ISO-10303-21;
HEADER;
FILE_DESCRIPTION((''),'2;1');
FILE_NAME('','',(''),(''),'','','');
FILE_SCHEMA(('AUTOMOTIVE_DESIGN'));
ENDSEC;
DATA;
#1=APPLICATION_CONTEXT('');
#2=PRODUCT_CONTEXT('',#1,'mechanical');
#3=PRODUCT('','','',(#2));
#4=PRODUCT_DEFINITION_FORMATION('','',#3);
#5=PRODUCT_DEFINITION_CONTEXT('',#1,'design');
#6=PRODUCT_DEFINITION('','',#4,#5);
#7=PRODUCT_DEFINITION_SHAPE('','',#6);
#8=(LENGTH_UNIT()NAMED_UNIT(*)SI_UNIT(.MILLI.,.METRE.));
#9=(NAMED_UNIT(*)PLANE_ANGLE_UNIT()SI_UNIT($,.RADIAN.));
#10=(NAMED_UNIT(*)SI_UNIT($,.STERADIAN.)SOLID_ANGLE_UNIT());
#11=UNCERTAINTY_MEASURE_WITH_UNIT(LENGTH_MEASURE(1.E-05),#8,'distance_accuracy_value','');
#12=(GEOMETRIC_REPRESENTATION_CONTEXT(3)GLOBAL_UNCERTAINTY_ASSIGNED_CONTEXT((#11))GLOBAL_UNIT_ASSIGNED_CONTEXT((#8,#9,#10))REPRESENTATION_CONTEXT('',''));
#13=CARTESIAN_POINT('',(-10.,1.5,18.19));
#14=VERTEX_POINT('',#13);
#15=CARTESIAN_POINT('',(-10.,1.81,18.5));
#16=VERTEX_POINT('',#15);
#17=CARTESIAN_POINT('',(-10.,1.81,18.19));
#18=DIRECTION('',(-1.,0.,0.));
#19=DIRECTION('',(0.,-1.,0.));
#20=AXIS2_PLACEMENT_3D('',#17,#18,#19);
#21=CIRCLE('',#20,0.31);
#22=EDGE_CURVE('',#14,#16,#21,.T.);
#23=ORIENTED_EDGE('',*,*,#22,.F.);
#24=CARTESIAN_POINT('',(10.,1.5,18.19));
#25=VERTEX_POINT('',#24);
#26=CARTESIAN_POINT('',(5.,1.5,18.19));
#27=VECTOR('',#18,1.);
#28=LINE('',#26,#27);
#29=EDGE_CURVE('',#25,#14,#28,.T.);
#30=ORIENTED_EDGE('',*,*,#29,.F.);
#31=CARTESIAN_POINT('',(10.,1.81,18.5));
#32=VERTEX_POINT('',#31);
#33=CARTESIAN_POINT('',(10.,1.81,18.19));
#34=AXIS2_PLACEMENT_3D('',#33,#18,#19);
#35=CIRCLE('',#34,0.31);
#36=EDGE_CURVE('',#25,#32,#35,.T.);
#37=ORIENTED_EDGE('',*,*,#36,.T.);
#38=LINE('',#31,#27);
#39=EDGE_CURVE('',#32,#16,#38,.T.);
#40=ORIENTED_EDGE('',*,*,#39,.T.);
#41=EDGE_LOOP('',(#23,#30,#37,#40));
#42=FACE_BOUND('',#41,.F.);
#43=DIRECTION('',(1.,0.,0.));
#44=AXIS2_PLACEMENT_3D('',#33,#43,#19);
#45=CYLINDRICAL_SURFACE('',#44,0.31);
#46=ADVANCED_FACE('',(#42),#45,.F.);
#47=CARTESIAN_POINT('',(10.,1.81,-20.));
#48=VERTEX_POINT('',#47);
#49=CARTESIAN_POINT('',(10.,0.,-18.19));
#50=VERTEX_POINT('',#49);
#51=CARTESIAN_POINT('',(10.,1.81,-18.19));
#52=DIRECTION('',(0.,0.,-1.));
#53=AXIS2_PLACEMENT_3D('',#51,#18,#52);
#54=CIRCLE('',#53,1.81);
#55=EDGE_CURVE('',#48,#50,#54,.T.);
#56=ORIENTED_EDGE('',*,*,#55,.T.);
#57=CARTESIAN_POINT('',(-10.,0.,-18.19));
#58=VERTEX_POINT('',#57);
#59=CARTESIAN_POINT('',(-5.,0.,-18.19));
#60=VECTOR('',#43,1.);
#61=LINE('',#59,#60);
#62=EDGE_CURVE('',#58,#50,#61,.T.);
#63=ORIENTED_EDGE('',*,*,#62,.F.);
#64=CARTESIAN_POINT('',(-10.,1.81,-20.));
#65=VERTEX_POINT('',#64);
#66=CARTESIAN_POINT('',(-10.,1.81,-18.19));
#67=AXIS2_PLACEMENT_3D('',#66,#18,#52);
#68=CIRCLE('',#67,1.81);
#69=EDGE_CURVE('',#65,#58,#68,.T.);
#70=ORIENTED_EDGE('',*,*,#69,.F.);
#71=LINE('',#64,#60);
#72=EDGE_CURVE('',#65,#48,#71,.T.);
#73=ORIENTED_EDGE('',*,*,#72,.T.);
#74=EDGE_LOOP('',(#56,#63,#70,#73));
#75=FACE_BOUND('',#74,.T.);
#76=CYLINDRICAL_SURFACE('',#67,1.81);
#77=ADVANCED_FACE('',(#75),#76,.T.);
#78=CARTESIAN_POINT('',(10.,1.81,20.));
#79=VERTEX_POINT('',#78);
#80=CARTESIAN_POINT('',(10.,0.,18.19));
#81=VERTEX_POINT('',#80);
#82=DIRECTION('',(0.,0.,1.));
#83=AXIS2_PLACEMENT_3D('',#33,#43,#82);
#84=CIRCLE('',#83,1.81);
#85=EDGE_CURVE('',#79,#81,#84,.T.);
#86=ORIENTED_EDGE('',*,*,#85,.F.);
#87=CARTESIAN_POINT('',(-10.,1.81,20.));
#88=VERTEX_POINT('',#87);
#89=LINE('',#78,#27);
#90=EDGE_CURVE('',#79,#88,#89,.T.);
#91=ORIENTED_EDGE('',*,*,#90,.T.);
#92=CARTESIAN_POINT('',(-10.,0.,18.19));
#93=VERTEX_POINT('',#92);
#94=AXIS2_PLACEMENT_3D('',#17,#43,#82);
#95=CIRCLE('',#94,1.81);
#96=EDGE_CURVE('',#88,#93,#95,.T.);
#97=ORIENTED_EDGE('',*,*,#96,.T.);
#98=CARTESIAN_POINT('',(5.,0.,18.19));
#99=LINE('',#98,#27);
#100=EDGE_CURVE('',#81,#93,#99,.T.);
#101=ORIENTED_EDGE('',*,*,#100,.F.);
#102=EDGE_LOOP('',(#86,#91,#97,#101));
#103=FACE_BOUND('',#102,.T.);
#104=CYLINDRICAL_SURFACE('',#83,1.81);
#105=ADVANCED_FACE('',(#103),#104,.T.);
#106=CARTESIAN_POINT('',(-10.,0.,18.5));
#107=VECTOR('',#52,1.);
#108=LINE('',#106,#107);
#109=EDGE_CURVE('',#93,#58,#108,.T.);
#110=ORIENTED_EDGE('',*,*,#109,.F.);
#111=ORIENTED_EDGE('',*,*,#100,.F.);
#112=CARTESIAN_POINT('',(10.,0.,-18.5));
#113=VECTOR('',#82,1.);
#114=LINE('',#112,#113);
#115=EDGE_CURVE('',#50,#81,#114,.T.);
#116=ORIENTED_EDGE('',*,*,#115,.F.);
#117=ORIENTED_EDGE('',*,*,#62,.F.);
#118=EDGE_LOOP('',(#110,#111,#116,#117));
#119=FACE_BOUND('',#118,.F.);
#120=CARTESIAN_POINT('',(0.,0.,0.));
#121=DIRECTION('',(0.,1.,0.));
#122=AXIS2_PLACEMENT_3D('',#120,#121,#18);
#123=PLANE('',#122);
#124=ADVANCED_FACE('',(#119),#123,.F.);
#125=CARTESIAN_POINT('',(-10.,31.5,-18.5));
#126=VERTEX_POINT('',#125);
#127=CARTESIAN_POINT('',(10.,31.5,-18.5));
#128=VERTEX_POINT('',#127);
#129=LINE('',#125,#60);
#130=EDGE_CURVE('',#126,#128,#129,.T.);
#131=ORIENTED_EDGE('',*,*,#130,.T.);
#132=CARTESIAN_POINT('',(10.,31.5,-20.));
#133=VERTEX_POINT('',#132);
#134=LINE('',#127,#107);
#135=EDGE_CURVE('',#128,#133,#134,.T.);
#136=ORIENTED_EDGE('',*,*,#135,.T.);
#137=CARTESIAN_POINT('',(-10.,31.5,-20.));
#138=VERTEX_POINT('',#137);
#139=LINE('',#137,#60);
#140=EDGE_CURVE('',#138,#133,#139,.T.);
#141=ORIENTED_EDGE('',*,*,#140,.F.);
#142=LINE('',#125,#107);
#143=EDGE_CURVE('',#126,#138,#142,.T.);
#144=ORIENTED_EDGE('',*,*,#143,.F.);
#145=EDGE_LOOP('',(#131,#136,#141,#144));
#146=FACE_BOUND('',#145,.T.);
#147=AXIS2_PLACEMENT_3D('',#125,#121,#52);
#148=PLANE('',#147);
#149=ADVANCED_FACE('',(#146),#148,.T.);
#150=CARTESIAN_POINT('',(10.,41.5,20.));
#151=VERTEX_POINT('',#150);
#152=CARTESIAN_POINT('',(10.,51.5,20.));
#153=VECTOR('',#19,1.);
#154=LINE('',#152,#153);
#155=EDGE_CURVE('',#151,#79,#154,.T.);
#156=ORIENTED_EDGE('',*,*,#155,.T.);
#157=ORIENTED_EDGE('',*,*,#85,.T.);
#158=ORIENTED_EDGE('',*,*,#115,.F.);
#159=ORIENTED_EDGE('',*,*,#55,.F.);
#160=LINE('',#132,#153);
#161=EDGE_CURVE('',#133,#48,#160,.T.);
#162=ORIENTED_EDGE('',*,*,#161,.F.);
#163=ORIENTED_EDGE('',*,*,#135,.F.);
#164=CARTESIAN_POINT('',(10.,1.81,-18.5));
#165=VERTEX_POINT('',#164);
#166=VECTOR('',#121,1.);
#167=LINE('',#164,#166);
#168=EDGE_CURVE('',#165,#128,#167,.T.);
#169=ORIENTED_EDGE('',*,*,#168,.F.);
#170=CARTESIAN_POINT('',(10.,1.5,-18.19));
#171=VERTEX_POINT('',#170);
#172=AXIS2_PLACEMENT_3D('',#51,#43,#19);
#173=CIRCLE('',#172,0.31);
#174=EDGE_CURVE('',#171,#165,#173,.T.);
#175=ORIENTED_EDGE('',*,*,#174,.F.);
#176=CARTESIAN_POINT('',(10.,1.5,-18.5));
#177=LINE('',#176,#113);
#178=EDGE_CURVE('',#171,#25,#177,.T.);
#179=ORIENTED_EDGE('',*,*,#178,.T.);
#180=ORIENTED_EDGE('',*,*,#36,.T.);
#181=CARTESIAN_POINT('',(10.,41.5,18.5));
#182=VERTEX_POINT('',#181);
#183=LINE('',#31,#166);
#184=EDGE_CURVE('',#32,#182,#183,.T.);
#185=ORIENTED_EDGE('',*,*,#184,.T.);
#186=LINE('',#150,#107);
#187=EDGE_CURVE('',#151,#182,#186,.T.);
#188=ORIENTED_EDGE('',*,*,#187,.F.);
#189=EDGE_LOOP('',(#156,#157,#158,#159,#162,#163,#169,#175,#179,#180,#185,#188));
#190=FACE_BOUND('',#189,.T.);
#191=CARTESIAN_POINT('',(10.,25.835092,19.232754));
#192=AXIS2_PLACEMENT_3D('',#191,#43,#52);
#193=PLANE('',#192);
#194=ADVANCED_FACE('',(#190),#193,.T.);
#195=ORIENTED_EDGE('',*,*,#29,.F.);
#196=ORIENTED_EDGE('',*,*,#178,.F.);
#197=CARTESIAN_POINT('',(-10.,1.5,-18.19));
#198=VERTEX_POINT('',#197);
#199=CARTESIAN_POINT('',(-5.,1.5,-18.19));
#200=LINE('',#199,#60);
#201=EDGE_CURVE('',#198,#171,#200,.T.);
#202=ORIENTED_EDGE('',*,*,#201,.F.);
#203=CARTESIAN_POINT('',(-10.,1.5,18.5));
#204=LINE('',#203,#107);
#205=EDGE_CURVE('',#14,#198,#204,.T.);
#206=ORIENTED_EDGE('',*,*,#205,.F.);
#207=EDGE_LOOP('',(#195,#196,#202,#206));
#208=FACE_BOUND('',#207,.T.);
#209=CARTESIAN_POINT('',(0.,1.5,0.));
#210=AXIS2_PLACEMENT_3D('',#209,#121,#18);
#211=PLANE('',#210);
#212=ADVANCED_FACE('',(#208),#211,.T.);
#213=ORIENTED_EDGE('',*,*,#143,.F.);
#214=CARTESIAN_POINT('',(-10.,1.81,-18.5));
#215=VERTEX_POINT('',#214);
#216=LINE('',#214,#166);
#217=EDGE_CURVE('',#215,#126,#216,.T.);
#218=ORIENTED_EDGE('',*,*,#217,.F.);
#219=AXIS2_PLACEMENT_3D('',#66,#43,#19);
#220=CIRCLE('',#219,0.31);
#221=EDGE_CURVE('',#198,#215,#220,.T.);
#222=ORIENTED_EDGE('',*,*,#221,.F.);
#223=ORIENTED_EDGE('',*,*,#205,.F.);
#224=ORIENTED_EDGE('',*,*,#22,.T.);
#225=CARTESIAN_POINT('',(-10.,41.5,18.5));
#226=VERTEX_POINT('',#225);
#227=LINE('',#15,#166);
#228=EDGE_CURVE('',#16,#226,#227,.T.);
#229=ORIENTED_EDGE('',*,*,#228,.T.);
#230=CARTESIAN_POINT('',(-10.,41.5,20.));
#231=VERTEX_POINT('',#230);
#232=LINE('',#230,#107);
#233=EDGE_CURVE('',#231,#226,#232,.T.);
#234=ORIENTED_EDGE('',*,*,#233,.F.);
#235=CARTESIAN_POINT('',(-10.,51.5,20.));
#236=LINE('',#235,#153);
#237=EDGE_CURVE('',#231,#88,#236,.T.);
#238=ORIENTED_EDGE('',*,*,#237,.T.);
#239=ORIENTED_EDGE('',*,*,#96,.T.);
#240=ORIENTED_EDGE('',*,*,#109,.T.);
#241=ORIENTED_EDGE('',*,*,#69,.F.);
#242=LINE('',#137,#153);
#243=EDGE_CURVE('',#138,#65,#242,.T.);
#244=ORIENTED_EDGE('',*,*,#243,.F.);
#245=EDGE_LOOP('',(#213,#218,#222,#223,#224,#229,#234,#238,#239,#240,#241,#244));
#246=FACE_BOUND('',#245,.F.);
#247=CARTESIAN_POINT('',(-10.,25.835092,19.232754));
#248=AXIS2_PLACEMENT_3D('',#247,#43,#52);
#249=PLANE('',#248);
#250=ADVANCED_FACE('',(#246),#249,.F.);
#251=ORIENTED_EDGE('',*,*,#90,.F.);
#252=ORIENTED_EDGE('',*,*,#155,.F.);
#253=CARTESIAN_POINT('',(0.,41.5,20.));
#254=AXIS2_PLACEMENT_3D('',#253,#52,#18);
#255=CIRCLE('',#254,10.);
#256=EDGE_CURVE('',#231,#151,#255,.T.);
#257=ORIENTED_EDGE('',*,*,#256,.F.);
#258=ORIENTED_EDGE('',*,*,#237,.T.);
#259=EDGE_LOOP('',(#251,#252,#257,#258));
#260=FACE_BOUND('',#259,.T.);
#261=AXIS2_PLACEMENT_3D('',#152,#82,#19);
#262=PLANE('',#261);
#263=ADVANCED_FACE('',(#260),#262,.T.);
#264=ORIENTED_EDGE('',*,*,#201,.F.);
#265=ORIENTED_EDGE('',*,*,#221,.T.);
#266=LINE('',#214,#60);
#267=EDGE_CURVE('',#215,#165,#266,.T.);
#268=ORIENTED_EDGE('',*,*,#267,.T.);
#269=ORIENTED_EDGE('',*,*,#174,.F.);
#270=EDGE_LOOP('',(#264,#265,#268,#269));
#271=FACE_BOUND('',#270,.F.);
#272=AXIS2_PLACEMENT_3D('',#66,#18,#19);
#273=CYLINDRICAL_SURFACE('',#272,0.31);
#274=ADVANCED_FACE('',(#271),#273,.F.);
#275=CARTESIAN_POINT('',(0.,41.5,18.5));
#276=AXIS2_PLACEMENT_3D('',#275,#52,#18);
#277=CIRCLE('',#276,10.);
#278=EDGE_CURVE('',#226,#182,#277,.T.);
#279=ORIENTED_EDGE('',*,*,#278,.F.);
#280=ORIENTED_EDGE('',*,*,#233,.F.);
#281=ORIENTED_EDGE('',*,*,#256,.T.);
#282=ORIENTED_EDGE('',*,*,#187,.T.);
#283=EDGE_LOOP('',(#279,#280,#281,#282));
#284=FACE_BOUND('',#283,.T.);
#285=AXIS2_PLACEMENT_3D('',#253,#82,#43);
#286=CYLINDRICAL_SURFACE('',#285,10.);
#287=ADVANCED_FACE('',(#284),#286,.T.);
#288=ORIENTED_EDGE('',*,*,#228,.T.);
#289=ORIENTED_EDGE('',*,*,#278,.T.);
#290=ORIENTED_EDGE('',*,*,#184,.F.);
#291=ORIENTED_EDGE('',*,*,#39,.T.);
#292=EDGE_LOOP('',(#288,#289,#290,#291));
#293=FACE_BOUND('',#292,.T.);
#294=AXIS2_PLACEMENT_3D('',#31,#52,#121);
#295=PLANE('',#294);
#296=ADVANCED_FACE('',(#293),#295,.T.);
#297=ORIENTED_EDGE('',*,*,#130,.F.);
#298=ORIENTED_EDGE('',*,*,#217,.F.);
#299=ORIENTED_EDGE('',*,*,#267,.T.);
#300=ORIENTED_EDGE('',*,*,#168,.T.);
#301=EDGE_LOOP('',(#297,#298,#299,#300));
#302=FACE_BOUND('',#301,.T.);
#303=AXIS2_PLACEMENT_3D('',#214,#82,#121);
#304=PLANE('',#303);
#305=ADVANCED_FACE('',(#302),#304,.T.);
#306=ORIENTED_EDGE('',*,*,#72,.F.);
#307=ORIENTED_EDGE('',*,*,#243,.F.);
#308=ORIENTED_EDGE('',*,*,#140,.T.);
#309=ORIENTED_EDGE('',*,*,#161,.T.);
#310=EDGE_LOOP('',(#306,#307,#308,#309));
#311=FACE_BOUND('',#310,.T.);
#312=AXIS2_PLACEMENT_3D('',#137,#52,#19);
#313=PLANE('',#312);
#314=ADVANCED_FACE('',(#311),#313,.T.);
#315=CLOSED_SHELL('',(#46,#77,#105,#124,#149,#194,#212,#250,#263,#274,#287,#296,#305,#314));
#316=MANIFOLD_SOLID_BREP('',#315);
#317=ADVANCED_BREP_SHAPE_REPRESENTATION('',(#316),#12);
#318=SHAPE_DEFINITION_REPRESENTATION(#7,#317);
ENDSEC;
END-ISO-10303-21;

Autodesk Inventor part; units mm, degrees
ref_plane "YZ Plane" through (0, 0, 0) normal (1, 0, 0) x (0, 1, 0)
ref_plane "XZ Plane" through (0, 0, 0) normal (0, 1, 0) x (-1, 0, 0)
ref_plane "XY Plane" through (0, 0, 0) normal (0, 0, 1) x (1, 0, 0)
sketch "Sketch1" plane through (0, 0, 0) normal (0, 1, 0) x (-1, 0, 0)
  line L0 (10, -18.5) -> (-10, -18.5)
  line L1 (-10, -18.5) -> (-10, 18.5)
  line L2 (-10, 18.5) -> (10, 18.5)
  line L3 (10, 18.5) -> (10, -18.5)
  point P0 (0, 0)
  dimension "d0" = 20
  dimension "d1" = 37
  dimension "d2" = 18.5
  dimension "d3" = 10
extrude "Plate1" add sketch "Sketch1" along normal blind 1.5
sketch "Sketch2" plane through (-10, 0, -20) normal (0, 0, 1) x (1, 0, 0)
  line L0 (20, 0) -> (0, 0)
  line L1 (0, 0) -> (0, 31.5)
  line L2 (0, 31.5) -> (20, 31.5)
  line L3 (20, 31.5) -> (20, 0)
edge flange "Flange1" height 31.5 angle 90 thickness 1.5 bend radius 0.31 thickness toward (0, 0, 1) relief tear relief width 1.5 relief depth 0.75 edges at (0, 1.5, -18.5) wall of the first edge with corners at (10, 0, -20) (-10, 0, -20) (-10, 31.5, -20) (10, 31.5, -20)
bend "Bend1"
corner "Corner1"
sketch "Sketch3" plane through (10, 0, 20) normal (0, 0, -1) x (-1, 0, 0)
  line L0 (20, 0) -> (0, 0)
  line L1 (0, 0) -> (0, 51.5)
  line L2 (0, 51.5) -> (20, 51.5)
  line L3 (20, 51.5) -> (20, 0)
edge flange "Flange2" height 51.5 angle 90 thickness 1.5 bend radius 0.31 thickness toward (0, 0, -1) relief tear relief width 1.5 relief depth 0.75 edges at (0, 1.5, 18.5) wall of the first edge with corners at (-10, 0, 20) (10, 0, 20) (10, 51.5, 20) (-10, 51.5, 20)
bend "Bend2"
corner "Corner2"
sketch "Sketch4" plane through (-10, 51.5, 20) normal (0, 0, 1) x (1, 0, 0)
  circle A0 centre (10, -10) radius 10
  line L0 (0, 0) -> (20, 0) projected
  line L1 (0, 0) -> (20, 0)
  line L2 (20, 0) -> (20, -10)
  line L3 (20, -10) -> (0, -10)
  line L4 (0, -10) -> (0, 0)
  line L5 (0, -49.69) -> (0, 0) projected
  point P0 (10, -51.5)
  point P1 (10, 0)
  dimension "d26" = 20
  dimension "d25" = 10
  dimension "d27" = 10
  dimension "d28" = 10
extrude "Extrusion1" cut sketch "Sketch4" against normal blind 10 contours L4 L0 A0 | A0 L0 L2
equation "\"d4\" = Thickness"
equation "\"d5\" = BendReliefWidth"
equation "\"d6\" = BendReliefDepth"
equation "\"d7\" = MinimumRemnant"
equation "\"d8\" = TransitionRadius"
equation "\"d11\" = BendRadius"
equation "\"d12\" = CornerReliefSize"
equation "\"d13\" = GapSize"
equation "\"d14\" = JacobiRadiusSize"
equation "\"d15\" = BendReliefWidth"
equation "\"d16\" = BendReliefDepth"
equation "\"d17\" = MinimumRemnant"
equation "\"d18\" = TransitionRadius"
equation "\"d21\" = BendRadius"
equation "\"d22\" = CornerReliefSize"
equation "\"d23\" = GapSize"
equation "\"d24\" = JacobiRadiusSize"
equation "\"BendReliefWidth\" = Thickness"
equation "\"BendReliefDepth\" = 0.5 * Thickness"
equation "\"CornerReliefSize\" = 4 * Thickness"
equation "\"MinimumRemnant\" = 2 * Thickness"
equation "\"TransitionRadius\" = BendRadius"
equation "\"JacobiRadiusSize\" = BendRadius"
equation "\"GapSize\" = Thickness"
equation "\"Thickness\" = 1.5"
equation "\"BendRadius\" = 0.31"
properties part number "axis_9_bottom_frame" material "Aluminum 6061-AHC"
